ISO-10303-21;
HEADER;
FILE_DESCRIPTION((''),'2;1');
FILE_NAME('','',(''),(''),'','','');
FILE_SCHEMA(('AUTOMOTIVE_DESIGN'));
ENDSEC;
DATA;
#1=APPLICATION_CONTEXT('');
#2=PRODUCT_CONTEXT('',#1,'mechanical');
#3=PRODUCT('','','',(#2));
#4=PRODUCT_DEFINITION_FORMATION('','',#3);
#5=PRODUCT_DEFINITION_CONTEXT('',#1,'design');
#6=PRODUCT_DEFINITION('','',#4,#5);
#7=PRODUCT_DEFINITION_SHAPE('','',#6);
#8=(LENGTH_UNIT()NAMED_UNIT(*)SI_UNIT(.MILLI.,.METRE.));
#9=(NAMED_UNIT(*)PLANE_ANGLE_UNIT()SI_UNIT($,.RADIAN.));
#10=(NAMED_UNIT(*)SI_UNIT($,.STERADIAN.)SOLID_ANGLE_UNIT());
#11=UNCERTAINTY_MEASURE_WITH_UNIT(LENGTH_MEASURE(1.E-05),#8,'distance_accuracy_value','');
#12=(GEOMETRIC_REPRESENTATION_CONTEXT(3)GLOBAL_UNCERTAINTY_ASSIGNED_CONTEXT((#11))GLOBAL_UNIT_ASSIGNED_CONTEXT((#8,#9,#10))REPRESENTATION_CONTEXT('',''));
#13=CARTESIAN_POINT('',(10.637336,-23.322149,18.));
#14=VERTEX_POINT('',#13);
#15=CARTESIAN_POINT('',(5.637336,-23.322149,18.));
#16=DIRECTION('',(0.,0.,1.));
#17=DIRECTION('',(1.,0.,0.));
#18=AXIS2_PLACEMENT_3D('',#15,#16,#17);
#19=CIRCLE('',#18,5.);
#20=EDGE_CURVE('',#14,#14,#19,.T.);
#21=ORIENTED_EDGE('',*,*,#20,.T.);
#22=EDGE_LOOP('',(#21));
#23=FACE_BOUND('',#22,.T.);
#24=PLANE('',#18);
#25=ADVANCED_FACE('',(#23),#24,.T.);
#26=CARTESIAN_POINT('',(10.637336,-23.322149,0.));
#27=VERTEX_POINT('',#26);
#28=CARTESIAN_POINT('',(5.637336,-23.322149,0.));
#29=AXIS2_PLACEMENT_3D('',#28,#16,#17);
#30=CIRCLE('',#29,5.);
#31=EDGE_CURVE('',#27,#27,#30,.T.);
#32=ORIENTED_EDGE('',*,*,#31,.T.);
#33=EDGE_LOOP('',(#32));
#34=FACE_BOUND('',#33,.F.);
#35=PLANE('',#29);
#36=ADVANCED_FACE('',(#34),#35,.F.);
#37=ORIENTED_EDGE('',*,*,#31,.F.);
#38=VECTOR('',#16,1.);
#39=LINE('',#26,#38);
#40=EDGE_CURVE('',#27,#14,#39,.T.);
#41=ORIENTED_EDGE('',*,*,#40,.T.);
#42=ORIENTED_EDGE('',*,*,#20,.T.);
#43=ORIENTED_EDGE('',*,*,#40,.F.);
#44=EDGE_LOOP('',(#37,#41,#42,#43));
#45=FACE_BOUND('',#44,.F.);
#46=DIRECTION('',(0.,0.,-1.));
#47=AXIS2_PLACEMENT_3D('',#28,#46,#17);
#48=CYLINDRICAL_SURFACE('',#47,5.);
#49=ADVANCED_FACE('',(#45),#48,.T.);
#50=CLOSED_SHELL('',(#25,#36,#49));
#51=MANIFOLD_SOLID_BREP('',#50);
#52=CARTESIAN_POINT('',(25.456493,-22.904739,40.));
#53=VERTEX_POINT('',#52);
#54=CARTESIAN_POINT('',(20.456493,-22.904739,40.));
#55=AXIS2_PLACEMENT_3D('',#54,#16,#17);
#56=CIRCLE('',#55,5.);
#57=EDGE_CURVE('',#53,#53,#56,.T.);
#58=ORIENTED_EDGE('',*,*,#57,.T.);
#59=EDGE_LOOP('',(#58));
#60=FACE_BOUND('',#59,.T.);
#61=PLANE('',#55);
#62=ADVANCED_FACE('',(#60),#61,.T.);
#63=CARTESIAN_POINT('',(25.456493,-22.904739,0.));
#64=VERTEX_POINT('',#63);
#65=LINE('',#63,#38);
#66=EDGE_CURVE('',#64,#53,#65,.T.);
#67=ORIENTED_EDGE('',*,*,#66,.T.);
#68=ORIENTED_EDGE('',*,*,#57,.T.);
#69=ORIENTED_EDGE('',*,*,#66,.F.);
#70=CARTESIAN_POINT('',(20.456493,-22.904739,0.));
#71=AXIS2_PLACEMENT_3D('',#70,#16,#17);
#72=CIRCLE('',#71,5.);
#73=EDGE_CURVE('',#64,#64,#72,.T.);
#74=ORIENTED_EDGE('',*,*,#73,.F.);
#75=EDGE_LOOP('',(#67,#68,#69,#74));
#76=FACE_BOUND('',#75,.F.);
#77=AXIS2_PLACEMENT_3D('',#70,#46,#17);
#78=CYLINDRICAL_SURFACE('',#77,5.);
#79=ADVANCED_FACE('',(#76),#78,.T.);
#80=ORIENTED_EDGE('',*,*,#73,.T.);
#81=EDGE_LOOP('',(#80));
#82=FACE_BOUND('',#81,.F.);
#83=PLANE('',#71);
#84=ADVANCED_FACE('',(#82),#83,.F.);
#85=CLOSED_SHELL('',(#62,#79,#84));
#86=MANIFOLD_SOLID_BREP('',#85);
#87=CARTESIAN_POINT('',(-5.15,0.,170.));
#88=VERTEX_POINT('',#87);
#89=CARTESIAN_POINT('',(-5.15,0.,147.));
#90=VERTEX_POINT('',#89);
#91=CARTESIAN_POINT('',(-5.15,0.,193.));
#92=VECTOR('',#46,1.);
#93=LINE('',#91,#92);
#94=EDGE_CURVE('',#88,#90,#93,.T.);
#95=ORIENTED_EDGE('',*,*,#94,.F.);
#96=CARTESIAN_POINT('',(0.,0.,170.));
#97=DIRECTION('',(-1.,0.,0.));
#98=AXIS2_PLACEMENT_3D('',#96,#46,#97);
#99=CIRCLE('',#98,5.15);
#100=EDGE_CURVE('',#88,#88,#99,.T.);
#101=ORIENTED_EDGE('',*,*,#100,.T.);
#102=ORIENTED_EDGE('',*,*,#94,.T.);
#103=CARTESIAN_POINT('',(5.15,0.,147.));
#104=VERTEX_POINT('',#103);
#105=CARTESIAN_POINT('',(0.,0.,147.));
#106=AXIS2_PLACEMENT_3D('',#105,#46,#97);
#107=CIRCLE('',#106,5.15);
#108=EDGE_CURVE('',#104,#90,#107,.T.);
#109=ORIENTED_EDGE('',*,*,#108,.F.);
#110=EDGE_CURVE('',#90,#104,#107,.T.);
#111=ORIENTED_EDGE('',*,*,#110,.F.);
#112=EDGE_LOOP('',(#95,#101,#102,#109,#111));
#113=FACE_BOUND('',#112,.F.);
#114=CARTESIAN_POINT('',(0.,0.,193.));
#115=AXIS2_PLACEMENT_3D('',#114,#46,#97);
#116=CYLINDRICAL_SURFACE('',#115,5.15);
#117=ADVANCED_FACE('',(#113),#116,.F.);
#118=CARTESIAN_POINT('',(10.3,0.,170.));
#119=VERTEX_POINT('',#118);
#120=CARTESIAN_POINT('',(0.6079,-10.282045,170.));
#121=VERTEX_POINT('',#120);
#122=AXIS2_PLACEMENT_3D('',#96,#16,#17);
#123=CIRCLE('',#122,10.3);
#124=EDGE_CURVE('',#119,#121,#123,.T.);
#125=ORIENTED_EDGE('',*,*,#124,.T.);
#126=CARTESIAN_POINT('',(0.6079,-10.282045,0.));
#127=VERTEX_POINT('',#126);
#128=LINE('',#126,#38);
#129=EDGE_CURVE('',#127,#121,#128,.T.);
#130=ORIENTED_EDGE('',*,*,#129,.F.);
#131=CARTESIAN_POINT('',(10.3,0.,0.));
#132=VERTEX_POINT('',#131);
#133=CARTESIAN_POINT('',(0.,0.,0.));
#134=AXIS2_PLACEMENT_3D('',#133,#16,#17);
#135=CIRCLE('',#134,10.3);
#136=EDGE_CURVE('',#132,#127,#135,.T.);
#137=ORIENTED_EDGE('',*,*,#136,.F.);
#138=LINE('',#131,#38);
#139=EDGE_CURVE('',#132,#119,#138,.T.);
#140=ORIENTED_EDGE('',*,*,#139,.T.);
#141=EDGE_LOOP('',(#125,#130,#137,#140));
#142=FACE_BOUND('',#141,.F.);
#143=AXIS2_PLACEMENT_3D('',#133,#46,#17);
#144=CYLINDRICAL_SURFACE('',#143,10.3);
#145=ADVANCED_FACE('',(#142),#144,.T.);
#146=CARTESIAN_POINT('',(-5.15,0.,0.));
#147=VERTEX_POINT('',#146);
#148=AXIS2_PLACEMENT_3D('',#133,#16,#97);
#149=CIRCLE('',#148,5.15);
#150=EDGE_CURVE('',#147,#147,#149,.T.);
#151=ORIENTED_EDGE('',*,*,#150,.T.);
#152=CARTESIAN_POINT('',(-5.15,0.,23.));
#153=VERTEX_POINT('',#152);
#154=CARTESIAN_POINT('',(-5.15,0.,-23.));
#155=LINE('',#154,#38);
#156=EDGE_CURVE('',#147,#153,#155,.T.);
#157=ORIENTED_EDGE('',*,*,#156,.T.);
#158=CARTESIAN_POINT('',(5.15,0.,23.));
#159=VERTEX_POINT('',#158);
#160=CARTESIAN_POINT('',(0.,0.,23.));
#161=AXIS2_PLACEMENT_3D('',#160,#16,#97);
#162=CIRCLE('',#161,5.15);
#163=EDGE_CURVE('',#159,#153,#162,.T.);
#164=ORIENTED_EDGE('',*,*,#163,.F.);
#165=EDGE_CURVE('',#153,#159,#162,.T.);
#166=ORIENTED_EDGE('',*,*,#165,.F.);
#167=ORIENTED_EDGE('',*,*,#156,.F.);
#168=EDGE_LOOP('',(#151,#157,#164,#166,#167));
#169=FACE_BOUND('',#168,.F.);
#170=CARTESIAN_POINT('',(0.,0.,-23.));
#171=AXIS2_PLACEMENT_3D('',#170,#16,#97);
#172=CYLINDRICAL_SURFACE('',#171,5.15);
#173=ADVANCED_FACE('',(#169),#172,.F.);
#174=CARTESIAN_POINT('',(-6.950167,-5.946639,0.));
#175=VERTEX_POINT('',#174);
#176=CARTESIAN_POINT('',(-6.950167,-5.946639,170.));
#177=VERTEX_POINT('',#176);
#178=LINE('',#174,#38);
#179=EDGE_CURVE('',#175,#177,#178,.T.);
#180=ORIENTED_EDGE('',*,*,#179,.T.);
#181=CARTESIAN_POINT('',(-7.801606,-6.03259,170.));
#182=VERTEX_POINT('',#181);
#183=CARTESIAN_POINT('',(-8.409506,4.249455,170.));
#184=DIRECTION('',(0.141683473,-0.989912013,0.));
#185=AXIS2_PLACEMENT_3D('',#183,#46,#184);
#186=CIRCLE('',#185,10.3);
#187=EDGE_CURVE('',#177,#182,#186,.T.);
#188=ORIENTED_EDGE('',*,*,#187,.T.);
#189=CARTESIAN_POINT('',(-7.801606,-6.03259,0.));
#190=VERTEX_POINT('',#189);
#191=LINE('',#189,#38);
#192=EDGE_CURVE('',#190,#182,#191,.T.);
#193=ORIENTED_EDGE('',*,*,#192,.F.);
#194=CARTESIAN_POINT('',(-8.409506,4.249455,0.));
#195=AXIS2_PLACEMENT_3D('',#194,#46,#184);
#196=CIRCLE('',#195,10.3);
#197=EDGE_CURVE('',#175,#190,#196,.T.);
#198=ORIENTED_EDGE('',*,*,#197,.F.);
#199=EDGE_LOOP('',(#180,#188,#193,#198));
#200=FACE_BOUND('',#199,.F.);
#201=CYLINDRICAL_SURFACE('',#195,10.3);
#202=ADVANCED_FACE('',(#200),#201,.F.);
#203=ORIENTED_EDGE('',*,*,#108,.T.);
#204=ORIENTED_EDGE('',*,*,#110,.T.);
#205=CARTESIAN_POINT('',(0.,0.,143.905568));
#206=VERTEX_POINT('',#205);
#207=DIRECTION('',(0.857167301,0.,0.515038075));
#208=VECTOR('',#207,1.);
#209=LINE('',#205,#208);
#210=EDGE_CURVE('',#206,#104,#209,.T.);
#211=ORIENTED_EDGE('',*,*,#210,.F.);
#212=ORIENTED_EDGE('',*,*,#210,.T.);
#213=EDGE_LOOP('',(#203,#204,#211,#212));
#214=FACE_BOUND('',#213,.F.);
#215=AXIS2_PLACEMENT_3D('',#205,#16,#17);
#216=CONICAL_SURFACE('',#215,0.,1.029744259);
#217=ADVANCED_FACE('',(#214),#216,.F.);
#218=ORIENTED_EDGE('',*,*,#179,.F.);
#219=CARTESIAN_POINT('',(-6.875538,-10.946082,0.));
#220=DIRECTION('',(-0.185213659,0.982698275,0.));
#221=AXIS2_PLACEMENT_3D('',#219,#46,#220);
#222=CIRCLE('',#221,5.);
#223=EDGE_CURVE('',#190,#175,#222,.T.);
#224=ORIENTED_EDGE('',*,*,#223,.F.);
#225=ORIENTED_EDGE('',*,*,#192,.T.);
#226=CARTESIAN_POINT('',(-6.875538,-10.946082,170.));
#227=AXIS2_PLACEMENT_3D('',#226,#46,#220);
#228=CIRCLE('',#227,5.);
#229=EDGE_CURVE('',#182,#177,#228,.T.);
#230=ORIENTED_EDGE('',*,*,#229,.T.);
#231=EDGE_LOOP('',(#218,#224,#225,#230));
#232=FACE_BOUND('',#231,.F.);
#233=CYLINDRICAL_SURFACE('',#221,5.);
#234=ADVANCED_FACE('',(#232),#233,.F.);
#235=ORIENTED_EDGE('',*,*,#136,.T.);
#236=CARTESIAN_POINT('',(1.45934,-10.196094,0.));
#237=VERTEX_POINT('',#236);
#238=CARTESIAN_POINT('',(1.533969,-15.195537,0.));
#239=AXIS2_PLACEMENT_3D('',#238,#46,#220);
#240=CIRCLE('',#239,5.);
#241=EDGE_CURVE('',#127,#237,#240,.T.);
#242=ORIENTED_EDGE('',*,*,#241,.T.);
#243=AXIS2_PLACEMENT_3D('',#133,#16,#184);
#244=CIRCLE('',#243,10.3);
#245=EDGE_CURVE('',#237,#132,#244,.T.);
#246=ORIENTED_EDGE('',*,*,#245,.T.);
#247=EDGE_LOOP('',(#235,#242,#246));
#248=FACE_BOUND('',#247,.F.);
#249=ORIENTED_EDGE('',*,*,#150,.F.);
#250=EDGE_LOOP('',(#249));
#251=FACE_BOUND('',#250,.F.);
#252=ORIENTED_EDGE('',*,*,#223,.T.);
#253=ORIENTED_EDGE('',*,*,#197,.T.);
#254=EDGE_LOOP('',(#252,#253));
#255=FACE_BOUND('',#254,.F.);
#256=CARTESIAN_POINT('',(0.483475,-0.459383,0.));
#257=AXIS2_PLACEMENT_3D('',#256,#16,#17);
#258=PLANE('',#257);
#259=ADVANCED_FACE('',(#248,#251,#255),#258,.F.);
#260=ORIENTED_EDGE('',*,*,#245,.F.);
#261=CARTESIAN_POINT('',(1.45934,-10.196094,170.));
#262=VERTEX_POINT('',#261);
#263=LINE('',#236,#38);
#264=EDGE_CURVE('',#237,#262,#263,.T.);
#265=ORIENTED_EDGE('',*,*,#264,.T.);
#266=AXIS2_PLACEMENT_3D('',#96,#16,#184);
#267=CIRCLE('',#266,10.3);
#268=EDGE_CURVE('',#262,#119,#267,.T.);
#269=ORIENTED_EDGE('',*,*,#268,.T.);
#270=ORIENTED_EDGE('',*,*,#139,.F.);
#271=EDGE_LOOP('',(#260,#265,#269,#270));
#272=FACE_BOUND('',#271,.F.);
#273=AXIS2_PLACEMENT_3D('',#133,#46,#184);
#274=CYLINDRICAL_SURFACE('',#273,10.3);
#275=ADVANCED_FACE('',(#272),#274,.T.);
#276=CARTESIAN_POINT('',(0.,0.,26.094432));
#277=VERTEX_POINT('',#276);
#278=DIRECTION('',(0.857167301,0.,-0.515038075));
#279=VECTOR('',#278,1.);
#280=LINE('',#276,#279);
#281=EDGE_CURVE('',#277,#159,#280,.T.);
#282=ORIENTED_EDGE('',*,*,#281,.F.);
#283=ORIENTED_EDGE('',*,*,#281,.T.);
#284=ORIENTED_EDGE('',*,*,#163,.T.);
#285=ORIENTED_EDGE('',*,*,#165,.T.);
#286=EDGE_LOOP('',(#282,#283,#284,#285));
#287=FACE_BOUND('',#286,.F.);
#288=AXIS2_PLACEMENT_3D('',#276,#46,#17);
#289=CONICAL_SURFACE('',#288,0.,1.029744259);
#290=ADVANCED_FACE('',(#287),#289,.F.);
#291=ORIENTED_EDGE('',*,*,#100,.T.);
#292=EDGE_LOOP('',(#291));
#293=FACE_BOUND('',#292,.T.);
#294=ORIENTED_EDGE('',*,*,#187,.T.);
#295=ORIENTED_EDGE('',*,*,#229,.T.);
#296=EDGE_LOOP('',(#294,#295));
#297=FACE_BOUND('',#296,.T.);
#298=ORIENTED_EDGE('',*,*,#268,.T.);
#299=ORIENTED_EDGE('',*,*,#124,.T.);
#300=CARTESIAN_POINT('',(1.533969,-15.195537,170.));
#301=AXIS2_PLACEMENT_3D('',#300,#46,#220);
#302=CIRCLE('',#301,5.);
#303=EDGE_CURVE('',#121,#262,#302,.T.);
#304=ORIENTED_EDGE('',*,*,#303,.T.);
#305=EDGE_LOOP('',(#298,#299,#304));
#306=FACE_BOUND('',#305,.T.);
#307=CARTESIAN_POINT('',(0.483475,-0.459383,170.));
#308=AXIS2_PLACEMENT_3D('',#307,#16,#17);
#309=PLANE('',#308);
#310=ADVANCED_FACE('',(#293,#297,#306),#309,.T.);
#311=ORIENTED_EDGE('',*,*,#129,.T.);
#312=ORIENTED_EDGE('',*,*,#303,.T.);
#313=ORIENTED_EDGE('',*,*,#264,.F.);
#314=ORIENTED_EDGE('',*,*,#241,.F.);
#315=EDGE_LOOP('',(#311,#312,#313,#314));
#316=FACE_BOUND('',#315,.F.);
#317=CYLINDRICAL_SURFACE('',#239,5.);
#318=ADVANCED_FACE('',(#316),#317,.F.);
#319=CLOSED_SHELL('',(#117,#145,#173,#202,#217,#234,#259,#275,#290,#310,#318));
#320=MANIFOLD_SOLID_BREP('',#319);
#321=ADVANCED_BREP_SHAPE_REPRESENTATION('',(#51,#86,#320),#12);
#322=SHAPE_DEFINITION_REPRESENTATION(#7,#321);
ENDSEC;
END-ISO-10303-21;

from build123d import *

# Parameters (mm, degrees)
F4_DEPTH = 170
F0_R     = 5
F5_DEPTH = 40
F6_D     = 10.3
F6_DEPTH = 23
F6_TIP   = 3.094432188
F1_DEPTH = 18
F3_D     = 10.3
F3_DEPTH = 23
F3_TIP   = 3.094432188


# Not quite as in the source:
# - a feature names something its author has since deleted; it is built from what else it names


with BuildPart() as f4:
    # F0 (on Top) → F4 (new body)
    with BuildSketch(Plane.XY):
        with BuildLine():
            ThreePointArc((1.459339769, -10.1960937343), (7.7820691214, -6.7475477167), (10.3, 0))
            ThreePointArc((10.3, 0), (-3.1805785381, 9.7966279996), (-8.335712653, -6.0502805363))
            ThreePointArc((-8.335712653, -6.0502805363), (-4.4053069437, -9.3103851012), (0.6079003247, -10.2820453799))
            ThreePointArc((0.6079003247, -10.2820453799), (1.0317778037, -10.2208202439), (1.459339769, -10.1960937343))
        make_face()
        with BuildLine():
            ThreePointArc((-6.950166537, -5.9466386188), (-7.3749932213, -5.9984609008), (-7.8016059813, -6.0325902644))
            ThreePointArc((-7.8016059813, -6.0325902644), (-7.3777285024, -5.9713651284), (-6.950166537, -5.9466386188))
        make_face(mode=Mode.SUBTRACT)
    extrude(amount=F4_DEPTH)

    # F6
    with Locations(Plane(origin=(0, 0, 0), x_dir=(1, 0, 0), z_dir=(0, 0, -1))):
        with Locations((0, 0)):
            Hole(F6_D / 2, depth=F6_DEPTH)
            with Locations((0, 0, -(F6_DEPTH + F6_TIP / 2))):  # 118° drill point
                Cone(0, F6_D / 2, F6_TIP, mode=Mode.SUBTRACT)

    # F3
    with Locations(Plane.XY.offset(170)):
        with Locations((0, 0)):
            Hole(F3_D / 2, depth=F3_DEPTH)
            with Locations((0, 0, -(F3_DEPTH + F3_TIP / 2))):  # 118° drill point
                Cone(0, F3_D / 2, F3_TIP, mode=Mode.SUBTRACT)


with BuildPart() as f5:
    # F0 (on Top) → F5 (new body)
    with BuildSketch(Plane.XY):
        with Locations((20.4564929008, -22.9047387838)):
            Circle(F0_R)
    extrude(amount=F5_DEPTH)


with BuildPart() as f1:
    # F0 (on Top) → F1 (new body)
    with BuildSketch(Plane.XY):
        with Locations((5.6373359263, -23.3221485403)):
            Circle(F0_R)
    extrude(amount=F1_DEPTH)


solid = Compound([f4.part, f5.part, f1.part])
